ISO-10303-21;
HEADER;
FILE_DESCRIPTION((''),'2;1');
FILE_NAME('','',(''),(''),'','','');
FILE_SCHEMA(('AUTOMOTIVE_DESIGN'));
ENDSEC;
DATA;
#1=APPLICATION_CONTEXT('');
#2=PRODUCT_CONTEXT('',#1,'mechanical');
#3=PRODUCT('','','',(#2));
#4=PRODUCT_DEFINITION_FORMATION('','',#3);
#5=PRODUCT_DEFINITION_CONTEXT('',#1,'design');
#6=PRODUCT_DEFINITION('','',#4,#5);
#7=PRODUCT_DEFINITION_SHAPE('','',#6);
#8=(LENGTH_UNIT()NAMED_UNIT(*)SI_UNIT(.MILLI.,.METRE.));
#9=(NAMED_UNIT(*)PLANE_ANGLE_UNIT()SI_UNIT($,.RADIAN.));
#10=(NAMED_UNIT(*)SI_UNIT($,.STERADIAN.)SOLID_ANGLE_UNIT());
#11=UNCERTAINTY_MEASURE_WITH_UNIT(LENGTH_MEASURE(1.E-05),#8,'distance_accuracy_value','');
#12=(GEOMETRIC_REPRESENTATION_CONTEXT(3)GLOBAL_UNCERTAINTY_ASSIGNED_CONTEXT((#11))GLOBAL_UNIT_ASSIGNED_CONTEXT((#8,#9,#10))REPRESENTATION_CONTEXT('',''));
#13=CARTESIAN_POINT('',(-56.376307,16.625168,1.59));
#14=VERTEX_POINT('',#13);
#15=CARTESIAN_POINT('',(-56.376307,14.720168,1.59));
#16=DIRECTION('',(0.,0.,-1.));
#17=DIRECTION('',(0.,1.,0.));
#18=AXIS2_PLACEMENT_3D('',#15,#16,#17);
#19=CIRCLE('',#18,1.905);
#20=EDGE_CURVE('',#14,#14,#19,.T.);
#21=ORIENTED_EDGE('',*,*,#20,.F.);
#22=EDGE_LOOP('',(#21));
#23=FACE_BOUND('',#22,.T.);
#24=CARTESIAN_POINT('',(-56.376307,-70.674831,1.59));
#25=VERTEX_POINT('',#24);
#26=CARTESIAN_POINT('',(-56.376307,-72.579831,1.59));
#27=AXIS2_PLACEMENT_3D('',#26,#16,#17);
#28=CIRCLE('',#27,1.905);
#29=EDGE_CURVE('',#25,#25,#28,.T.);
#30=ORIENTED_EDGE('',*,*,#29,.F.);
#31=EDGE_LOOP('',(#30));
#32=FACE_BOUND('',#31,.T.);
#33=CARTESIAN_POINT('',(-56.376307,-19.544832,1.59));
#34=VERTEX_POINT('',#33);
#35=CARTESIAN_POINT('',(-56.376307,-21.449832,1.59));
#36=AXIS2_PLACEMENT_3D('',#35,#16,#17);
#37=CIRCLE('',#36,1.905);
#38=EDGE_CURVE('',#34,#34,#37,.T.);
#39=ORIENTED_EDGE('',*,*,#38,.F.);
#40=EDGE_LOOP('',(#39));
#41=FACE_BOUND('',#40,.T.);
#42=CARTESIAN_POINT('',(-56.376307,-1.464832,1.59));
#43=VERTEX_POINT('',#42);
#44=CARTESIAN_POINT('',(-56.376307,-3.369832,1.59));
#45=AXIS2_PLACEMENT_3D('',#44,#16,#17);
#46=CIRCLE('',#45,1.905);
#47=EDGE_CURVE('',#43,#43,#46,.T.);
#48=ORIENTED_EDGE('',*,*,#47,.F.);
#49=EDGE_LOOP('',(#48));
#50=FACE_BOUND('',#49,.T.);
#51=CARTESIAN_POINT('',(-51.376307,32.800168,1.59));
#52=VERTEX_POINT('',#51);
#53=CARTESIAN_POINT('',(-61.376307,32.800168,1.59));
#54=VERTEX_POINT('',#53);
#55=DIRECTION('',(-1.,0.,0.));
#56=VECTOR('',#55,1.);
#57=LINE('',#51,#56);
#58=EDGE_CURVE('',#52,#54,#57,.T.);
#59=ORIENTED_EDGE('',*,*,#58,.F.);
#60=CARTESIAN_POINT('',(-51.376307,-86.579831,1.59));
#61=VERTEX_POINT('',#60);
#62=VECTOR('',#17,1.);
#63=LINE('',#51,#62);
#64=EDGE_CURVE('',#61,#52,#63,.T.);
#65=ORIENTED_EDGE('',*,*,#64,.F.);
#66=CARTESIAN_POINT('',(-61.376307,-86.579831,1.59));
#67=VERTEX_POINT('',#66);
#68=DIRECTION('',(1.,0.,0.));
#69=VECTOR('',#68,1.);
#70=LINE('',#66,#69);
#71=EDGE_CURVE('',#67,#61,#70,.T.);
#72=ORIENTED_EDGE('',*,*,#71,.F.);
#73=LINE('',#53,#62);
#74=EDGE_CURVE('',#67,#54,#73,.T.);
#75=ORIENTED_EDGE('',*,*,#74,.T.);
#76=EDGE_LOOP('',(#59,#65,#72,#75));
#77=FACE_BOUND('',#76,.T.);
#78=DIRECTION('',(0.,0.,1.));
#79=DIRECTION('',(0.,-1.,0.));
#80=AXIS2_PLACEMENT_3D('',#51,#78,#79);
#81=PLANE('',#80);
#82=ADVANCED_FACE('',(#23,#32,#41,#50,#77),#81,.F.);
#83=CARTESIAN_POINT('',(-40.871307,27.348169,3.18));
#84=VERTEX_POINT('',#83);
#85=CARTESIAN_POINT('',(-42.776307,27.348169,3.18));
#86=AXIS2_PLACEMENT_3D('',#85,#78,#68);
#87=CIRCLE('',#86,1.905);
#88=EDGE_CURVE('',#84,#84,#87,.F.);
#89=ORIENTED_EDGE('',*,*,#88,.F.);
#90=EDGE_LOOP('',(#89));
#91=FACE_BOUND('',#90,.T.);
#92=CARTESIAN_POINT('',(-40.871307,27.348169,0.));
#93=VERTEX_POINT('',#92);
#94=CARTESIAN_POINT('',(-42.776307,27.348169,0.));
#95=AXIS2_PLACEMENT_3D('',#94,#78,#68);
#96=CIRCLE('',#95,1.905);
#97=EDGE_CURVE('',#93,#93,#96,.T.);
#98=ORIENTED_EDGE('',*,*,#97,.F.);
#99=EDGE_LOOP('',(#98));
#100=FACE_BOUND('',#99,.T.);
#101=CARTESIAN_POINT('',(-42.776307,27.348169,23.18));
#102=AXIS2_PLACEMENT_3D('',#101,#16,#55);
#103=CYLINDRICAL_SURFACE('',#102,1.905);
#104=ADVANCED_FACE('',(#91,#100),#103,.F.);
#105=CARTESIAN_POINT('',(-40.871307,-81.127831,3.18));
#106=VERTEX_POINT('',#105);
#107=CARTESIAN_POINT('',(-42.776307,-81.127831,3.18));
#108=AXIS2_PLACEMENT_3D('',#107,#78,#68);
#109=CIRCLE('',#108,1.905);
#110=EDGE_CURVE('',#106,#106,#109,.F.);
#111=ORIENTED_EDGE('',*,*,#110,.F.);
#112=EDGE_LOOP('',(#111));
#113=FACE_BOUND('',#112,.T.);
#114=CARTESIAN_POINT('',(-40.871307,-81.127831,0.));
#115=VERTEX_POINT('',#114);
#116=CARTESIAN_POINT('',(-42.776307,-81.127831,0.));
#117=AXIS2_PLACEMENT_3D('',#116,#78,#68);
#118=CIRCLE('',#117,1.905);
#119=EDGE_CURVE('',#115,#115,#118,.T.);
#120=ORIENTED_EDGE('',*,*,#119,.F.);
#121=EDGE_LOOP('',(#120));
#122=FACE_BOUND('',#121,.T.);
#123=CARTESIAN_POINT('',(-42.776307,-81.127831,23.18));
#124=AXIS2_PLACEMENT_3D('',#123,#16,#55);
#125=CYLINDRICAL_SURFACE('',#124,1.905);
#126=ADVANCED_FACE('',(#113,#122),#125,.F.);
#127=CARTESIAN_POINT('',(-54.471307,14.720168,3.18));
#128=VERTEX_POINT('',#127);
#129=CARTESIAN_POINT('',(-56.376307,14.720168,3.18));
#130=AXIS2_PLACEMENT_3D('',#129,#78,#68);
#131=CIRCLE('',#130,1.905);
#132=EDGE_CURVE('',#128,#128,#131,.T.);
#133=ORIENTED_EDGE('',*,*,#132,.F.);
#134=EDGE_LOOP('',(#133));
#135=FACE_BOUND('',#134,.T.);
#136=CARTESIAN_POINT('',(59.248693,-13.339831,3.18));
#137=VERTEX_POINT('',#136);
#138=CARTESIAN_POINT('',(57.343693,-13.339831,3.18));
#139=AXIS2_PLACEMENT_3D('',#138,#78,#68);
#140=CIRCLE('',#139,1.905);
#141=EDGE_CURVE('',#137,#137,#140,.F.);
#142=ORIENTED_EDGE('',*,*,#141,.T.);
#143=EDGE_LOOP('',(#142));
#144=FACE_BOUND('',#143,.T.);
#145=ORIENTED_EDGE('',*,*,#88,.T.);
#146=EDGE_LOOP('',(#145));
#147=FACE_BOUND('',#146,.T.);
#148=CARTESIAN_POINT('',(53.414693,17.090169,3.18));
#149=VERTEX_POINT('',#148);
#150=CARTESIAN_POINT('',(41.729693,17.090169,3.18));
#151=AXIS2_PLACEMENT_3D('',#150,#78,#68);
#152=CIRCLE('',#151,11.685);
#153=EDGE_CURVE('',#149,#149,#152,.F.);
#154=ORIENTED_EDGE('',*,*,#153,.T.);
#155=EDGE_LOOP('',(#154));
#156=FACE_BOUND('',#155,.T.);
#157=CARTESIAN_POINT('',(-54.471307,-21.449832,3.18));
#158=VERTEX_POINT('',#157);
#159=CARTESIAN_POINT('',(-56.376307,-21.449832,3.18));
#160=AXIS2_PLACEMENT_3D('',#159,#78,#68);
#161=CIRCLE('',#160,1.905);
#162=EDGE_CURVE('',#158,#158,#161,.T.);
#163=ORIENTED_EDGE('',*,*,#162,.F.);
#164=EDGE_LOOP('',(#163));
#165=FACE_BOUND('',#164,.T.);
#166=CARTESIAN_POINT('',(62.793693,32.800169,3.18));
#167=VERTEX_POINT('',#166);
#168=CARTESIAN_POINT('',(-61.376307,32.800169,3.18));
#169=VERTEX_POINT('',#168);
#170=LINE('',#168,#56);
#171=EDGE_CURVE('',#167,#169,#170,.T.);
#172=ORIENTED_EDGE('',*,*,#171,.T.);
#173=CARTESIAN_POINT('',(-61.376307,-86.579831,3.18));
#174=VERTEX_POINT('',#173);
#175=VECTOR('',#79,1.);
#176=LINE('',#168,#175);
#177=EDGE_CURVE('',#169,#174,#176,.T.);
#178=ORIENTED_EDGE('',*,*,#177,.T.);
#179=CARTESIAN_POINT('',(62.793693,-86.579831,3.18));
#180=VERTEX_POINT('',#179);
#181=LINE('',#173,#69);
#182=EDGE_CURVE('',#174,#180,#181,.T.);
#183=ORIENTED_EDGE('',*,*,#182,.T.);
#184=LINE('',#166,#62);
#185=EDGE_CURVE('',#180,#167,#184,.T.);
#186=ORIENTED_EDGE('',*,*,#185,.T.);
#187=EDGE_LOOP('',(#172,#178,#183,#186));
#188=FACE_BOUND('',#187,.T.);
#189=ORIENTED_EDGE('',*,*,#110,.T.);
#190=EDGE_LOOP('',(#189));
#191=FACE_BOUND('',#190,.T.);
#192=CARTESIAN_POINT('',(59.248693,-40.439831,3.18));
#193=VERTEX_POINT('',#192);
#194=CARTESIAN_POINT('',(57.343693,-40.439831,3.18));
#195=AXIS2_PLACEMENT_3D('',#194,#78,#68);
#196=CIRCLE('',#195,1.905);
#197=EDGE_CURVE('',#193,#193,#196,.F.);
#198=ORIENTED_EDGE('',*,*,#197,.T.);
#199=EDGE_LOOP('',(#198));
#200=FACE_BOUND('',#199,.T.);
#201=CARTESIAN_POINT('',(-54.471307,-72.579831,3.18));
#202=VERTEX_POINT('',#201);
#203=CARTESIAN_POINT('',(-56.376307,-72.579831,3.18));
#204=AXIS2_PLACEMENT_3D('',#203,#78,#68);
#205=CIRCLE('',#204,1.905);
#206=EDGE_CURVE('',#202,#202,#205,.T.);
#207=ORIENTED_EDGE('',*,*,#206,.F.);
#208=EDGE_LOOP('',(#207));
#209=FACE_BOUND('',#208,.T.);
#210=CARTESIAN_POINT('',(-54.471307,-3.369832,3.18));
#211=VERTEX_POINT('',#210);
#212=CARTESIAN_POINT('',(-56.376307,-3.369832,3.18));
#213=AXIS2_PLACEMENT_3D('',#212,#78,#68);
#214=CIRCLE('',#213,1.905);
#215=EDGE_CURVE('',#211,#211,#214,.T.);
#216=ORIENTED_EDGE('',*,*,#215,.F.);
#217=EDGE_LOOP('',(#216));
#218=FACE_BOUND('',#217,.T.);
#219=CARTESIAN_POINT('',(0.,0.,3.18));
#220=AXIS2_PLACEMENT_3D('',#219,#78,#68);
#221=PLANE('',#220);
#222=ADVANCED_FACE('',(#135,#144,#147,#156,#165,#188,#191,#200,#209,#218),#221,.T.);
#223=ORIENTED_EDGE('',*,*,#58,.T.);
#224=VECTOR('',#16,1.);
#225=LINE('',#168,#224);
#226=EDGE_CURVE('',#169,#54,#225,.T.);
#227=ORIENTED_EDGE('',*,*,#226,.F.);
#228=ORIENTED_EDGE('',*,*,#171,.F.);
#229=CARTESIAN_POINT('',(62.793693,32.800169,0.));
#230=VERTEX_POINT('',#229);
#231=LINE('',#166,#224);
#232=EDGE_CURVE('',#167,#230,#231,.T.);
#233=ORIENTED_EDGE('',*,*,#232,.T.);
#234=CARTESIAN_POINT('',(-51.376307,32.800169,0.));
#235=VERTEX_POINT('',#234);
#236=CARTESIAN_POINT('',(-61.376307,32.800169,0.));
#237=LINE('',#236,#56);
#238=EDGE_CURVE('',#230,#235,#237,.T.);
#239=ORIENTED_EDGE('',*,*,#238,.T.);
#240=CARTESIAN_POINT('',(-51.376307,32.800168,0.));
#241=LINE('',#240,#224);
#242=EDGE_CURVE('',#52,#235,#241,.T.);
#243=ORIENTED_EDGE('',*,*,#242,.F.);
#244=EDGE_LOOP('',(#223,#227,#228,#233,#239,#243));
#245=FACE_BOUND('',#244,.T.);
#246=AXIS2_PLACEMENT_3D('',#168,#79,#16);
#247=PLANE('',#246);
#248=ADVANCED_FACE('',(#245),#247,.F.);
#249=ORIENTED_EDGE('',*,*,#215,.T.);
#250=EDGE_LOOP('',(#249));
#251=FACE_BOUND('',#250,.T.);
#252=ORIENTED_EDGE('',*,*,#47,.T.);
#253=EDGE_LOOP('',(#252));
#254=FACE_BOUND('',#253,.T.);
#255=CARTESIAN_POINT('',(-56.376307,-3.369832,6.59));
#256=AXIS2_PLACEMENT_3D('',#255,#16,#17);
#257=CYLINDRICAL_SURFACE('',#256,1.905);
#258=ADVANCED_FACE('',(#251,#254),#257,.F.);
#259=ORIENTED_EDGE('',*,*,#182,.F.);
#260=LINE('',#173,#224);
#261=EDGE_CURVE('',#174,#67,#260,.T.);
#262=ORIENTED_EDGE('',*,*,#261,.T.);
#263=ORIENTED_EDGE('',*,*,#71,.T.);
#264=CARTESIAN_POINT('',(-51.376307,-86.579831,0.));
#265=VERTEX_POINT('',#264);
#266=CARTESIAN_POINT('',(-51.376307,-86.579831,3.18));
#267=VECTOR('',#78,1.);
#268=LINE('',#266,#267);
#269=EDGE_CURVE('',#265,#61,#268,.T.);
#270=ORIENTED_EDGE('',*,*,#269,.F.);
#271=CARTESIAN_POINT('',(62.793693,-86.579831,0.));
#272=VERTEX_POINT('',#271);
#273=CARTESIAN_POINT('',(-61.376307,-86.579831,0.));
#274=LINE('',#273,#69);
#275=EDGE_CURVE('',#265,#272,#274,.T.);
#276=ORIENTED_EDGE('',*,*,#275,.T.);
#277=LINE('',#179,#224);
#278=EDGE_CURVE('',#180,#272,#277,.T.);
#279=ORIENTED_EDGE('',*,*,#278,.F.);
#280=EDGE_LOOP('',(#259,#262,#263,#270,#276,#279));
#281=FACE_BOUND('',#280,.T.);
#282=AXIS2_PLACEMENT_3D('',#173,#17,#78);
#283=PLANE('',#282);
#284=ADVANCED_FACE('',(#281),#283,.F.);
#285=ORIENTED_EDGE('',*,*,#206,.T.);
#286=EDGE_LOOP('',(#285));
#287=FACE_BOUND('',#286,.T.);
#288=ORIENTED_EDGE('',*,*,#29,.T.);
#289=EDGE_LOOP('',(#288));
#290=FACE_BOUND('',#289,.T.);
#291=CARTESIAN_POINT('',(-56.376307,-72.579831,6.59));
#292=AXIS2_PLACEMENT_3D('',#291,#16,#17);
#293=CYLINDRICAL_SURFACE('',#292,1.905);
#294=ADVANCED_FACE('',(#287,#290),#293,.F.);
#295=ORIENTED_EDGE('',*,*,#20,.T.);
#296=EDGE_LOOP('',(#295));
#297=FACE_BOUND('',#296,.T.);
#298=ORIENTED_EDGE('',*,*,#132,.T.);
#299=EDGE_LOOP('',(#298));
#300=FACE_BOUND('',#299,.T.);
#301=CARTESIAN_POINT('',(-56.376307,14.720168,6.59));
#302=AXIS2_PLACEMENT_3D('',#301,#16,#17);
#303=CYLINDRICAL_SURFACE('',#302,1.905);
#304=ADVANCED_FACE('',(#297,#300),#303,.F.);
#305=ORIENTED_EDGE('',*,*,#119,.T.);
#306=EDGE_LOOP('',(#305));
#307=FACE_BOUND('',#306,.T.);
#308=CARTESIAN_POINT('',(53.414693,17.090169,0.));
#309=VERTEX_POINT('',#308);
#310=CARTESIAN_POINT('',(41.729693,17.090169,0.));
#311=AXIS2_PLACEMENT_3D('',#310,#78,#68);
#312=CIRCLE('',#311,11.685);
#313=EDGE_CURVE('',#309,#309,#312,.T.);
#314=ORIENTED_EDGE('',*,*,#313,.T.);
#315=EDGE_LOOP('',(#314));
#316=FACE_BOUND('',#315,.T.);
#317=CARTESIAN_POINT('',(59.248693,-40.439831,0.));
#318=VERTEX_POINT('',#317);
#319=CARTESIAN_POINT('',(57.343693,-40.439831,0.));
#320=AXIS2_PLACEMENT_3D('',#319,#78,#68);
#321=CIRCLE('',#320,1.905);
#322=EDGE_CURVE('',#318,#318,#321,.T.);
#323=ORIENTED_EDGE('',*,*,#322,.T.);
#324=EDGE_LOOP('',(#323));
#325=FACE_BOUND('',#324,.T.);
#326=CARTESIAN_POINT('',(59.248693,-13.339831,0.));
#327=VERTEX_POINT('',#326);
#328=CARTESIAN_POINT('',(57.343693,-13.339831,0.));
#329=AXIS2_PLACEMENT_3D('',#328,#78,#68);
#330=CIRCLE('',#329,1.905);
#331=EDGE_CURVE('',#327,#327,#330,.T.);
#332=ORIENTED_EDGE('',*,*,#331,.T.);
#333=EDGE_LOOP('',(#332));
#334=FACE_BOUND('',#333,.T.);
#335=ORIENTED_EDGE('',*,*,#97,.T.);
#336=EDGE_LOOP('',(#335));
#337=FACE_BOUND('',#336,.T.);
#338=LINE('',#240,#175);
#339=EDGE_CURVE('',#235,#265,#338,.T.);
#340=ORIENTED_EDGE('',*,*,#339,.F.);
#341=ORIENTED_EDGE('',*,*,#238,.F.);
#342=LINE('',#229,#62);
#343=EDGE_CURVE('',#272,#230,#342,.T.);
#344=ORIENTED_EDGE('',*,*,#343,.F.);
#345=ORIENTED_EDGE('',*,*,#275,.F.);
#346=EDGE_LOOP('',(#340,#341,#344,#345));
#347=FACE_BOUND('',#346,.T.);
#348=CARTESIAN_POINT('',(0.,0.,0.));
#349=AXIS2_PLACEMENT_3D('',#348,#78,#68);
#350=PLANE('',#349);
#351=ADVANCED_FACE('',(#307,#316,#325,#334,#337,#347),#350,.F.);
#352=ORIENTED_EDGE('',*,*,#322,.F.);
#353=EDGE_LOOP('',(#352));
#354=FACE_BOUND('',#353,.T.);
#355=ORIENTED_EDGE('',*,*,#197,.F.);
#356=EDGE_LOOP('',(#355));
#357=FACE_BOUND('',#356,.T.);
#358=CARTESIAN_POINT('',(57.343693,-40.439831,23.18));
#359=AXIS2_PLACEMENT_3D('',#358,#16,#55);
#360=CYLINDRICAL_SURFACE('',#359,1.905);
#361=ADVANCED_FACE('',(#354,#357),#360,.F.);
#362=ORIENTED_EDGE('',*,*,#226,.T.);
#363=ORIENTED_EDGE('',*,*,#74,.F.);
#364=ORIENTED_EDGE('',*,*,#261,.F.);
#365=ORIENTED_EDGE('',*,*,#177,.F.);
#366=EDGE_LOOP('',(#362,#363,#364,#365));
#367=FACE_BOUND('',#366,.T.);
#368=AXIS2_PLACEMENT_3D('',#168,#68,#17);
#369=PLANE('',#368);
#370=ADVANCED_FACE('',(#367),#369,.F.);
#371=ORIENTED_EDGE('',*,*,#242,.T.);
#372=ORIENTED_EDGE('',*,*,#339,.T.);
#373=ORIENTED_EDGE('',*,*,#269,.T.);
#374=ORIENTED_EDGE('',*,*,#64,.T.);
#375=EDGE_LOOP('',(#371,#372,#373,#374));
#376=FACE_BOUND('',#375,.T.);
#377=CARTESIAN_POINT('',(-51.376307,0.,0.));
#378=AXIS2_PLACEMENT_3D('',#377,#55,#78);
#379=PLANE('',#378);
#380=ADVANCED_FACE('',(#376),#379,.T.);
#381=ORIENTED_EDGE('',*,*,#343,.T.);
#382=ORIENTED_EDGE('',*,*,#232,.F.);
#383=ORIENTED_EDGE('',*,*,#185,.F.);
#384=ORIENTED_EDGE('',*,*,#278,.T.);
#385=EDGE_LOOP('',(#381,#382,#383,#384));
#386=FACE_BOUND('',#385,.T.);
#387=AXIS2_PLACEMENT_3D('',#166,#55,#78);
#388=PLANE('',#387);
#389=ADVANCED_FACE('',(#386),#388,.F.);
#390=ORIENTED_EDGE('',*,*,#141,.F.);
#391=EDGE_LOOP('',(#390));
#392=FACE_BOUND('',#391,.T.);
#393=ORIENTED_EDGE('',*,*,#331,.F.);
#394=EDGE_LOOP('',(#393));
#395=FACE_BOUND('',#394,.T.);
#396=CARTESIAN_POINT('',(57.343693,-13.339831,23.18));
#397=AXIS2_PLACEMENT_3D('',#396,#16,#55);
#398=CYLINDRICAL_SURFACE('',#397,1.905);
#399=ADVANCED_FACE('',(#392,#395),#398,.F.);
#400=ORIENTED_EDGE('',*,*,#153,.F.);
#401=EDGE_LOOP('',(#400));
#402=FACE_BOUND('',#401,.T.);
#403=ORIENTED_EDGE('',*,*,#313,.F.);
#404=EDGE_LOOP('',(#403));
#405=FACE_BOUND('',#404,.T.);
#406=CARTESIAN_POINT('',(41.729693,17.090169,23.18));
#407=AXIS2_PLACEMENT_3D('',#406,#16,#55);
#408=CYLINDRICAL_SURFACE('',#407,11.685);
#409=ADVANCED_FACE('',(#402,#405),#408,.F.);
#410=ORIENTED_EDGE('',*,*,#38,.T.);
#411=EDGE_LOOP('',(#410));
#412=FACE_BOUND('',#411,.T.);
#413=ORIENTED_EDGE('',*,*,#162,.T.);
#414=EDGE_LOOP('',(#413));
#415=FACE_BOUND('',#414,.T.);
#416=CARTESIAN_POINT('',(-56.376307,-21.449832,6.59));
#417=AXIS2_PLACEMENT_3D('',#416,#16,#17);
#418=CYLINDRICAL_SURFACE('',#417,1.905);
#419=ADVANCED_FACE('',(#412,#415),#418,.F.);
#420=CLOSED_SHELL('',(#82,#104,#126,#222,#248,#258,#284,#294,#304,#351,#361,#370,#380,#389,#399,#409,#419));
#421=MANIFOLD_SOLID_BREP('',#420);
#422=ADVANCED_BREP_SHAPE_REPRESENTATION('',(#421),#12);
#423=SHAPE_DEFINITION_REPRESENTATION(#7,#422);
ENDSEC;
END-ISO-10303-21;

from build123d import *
from OCP.BRepAlgoAPI import BRepAlgoAPI_Cut
from OCP.TopTools import TopTools_ListOfShape

# Parameters (mm, degrees)
SKETCH2_W           = 124.17
SKETCH2_H           = 119.38
BOSS_EXTRUDE1_DEPTH = 3.18
SKETCH3_R           = 1.905
SKETCH3_R_2         = 11.685
CUT_EXTRUDE1_DEPTH  = 23.18
SKETCH5_W           = 1.59
SKETCH5_H           = 120
CUT_EXTRUDE2_DEPTH  = 10
SKETCH6_R           = 1.905
CUT_EXTRUDE3_DEPTH  = 5


with BuildPart() as part:
    # Sketch2 → Boss-Extrude1 (new body)
    with BuildSketch(Plane(origin=(0, -1.061487407, 0), x_dir=(1, 0, 0), z_dir=(0, 0, 1))):
        with Locations((0.708693295, -25.828343308)):
            Rectangle(SKETCH2_W, SKETCH2_H)
    extrude(amount=BOSS_EXTRUDE1_DEPTH)

    # Sketch3 → Cut-Extrude1 (cut)
    with BuildSketch(Plane.XY):
        with Locations((-42.776306705, 27.348169285)):
            Circle(SKETCH3_R)
        with Locations((41.729693295, 17.090169285)):
            Circle(SKETCH3_R_2)
        with Locations((-42.776306705, -81.127830715)):
            Circle(SKETCH3_R)
        with Locations((57.343693295, -13.339830715)):
            Circle(SKETCH3_R)
        with Locations((57.343693295, -40.439830715)):
            Circle(SKETCH3_R)
    extrude(amount=CUT_EXTRUDE1_DEPTH, mode=Mode.SUBTRACT)


with BuildPart() as cut_extrude2_tool:
    # Sketch5 → Cut-Extrude2 (new body)
    with BuildSketch(Plane.ZY.offset(61.376306705)):
        with Locations((0.794999799, -27.199831736)):
            Rectangle(SKETCH5_W, SKETCH5_H)
    extrude(amount=-CUT_EXTRUDE2_DEPTH)


with BuildPart() as part_1:
    add(part.part)

    # Cut-Extrude2: cut by cut_extrude2_tool, with a tolerance
    cut_extrude2_stock = TopTools_ListOfShape()
    cut_extrude2_stock.Append(part_1.part.wrapped)
    cut_extrude2_tools = TopTools_ListOfShape()
    cut_extrude2_tools.Append(cut_extrude2_tool.part.wrapped)
    cut_extrude2_cut = BRepAlgoAPI_Cut()
    cut_extrude2_cut.SetArguments(cut_extrude2_stock)
    cut_extrude2_cut.SetTools(cut_extrude2_tools)
    cut_extrude2_cut.SetFuzzyValue(0.00001)
    cut_extrude2_cut.Build()
    add(Compound.cast(cut_extrude2_cut.Shape()).solids(), mode=Mode.REPLACE)

    # Sketch6 → Cut-Extrude3 (cut)
    with BuildSketch(Plane(origin=(0, 0, 1.589999799), x_dir=(-1, 0, 0), z_dir=(0, 0, -1))):
        with Locations((56.376306705, 14.720168264)):
            Circle(SKETCH6_R)
        with Locations((56.376306705, -21.449831736)):
            Circle(SKETCH6_R)
        with Locations((56.376306705, -72.579830715)):
            Circle(SKETCH6_R)
        with Locations((56.376306705, -3.369831736)):
            Circle(SKETCH6_R)
    extrude(amount=-CUT_EXTRUDE3_DEPTH, mode=Mode.SUBTRACT)


solid = part_1.part
